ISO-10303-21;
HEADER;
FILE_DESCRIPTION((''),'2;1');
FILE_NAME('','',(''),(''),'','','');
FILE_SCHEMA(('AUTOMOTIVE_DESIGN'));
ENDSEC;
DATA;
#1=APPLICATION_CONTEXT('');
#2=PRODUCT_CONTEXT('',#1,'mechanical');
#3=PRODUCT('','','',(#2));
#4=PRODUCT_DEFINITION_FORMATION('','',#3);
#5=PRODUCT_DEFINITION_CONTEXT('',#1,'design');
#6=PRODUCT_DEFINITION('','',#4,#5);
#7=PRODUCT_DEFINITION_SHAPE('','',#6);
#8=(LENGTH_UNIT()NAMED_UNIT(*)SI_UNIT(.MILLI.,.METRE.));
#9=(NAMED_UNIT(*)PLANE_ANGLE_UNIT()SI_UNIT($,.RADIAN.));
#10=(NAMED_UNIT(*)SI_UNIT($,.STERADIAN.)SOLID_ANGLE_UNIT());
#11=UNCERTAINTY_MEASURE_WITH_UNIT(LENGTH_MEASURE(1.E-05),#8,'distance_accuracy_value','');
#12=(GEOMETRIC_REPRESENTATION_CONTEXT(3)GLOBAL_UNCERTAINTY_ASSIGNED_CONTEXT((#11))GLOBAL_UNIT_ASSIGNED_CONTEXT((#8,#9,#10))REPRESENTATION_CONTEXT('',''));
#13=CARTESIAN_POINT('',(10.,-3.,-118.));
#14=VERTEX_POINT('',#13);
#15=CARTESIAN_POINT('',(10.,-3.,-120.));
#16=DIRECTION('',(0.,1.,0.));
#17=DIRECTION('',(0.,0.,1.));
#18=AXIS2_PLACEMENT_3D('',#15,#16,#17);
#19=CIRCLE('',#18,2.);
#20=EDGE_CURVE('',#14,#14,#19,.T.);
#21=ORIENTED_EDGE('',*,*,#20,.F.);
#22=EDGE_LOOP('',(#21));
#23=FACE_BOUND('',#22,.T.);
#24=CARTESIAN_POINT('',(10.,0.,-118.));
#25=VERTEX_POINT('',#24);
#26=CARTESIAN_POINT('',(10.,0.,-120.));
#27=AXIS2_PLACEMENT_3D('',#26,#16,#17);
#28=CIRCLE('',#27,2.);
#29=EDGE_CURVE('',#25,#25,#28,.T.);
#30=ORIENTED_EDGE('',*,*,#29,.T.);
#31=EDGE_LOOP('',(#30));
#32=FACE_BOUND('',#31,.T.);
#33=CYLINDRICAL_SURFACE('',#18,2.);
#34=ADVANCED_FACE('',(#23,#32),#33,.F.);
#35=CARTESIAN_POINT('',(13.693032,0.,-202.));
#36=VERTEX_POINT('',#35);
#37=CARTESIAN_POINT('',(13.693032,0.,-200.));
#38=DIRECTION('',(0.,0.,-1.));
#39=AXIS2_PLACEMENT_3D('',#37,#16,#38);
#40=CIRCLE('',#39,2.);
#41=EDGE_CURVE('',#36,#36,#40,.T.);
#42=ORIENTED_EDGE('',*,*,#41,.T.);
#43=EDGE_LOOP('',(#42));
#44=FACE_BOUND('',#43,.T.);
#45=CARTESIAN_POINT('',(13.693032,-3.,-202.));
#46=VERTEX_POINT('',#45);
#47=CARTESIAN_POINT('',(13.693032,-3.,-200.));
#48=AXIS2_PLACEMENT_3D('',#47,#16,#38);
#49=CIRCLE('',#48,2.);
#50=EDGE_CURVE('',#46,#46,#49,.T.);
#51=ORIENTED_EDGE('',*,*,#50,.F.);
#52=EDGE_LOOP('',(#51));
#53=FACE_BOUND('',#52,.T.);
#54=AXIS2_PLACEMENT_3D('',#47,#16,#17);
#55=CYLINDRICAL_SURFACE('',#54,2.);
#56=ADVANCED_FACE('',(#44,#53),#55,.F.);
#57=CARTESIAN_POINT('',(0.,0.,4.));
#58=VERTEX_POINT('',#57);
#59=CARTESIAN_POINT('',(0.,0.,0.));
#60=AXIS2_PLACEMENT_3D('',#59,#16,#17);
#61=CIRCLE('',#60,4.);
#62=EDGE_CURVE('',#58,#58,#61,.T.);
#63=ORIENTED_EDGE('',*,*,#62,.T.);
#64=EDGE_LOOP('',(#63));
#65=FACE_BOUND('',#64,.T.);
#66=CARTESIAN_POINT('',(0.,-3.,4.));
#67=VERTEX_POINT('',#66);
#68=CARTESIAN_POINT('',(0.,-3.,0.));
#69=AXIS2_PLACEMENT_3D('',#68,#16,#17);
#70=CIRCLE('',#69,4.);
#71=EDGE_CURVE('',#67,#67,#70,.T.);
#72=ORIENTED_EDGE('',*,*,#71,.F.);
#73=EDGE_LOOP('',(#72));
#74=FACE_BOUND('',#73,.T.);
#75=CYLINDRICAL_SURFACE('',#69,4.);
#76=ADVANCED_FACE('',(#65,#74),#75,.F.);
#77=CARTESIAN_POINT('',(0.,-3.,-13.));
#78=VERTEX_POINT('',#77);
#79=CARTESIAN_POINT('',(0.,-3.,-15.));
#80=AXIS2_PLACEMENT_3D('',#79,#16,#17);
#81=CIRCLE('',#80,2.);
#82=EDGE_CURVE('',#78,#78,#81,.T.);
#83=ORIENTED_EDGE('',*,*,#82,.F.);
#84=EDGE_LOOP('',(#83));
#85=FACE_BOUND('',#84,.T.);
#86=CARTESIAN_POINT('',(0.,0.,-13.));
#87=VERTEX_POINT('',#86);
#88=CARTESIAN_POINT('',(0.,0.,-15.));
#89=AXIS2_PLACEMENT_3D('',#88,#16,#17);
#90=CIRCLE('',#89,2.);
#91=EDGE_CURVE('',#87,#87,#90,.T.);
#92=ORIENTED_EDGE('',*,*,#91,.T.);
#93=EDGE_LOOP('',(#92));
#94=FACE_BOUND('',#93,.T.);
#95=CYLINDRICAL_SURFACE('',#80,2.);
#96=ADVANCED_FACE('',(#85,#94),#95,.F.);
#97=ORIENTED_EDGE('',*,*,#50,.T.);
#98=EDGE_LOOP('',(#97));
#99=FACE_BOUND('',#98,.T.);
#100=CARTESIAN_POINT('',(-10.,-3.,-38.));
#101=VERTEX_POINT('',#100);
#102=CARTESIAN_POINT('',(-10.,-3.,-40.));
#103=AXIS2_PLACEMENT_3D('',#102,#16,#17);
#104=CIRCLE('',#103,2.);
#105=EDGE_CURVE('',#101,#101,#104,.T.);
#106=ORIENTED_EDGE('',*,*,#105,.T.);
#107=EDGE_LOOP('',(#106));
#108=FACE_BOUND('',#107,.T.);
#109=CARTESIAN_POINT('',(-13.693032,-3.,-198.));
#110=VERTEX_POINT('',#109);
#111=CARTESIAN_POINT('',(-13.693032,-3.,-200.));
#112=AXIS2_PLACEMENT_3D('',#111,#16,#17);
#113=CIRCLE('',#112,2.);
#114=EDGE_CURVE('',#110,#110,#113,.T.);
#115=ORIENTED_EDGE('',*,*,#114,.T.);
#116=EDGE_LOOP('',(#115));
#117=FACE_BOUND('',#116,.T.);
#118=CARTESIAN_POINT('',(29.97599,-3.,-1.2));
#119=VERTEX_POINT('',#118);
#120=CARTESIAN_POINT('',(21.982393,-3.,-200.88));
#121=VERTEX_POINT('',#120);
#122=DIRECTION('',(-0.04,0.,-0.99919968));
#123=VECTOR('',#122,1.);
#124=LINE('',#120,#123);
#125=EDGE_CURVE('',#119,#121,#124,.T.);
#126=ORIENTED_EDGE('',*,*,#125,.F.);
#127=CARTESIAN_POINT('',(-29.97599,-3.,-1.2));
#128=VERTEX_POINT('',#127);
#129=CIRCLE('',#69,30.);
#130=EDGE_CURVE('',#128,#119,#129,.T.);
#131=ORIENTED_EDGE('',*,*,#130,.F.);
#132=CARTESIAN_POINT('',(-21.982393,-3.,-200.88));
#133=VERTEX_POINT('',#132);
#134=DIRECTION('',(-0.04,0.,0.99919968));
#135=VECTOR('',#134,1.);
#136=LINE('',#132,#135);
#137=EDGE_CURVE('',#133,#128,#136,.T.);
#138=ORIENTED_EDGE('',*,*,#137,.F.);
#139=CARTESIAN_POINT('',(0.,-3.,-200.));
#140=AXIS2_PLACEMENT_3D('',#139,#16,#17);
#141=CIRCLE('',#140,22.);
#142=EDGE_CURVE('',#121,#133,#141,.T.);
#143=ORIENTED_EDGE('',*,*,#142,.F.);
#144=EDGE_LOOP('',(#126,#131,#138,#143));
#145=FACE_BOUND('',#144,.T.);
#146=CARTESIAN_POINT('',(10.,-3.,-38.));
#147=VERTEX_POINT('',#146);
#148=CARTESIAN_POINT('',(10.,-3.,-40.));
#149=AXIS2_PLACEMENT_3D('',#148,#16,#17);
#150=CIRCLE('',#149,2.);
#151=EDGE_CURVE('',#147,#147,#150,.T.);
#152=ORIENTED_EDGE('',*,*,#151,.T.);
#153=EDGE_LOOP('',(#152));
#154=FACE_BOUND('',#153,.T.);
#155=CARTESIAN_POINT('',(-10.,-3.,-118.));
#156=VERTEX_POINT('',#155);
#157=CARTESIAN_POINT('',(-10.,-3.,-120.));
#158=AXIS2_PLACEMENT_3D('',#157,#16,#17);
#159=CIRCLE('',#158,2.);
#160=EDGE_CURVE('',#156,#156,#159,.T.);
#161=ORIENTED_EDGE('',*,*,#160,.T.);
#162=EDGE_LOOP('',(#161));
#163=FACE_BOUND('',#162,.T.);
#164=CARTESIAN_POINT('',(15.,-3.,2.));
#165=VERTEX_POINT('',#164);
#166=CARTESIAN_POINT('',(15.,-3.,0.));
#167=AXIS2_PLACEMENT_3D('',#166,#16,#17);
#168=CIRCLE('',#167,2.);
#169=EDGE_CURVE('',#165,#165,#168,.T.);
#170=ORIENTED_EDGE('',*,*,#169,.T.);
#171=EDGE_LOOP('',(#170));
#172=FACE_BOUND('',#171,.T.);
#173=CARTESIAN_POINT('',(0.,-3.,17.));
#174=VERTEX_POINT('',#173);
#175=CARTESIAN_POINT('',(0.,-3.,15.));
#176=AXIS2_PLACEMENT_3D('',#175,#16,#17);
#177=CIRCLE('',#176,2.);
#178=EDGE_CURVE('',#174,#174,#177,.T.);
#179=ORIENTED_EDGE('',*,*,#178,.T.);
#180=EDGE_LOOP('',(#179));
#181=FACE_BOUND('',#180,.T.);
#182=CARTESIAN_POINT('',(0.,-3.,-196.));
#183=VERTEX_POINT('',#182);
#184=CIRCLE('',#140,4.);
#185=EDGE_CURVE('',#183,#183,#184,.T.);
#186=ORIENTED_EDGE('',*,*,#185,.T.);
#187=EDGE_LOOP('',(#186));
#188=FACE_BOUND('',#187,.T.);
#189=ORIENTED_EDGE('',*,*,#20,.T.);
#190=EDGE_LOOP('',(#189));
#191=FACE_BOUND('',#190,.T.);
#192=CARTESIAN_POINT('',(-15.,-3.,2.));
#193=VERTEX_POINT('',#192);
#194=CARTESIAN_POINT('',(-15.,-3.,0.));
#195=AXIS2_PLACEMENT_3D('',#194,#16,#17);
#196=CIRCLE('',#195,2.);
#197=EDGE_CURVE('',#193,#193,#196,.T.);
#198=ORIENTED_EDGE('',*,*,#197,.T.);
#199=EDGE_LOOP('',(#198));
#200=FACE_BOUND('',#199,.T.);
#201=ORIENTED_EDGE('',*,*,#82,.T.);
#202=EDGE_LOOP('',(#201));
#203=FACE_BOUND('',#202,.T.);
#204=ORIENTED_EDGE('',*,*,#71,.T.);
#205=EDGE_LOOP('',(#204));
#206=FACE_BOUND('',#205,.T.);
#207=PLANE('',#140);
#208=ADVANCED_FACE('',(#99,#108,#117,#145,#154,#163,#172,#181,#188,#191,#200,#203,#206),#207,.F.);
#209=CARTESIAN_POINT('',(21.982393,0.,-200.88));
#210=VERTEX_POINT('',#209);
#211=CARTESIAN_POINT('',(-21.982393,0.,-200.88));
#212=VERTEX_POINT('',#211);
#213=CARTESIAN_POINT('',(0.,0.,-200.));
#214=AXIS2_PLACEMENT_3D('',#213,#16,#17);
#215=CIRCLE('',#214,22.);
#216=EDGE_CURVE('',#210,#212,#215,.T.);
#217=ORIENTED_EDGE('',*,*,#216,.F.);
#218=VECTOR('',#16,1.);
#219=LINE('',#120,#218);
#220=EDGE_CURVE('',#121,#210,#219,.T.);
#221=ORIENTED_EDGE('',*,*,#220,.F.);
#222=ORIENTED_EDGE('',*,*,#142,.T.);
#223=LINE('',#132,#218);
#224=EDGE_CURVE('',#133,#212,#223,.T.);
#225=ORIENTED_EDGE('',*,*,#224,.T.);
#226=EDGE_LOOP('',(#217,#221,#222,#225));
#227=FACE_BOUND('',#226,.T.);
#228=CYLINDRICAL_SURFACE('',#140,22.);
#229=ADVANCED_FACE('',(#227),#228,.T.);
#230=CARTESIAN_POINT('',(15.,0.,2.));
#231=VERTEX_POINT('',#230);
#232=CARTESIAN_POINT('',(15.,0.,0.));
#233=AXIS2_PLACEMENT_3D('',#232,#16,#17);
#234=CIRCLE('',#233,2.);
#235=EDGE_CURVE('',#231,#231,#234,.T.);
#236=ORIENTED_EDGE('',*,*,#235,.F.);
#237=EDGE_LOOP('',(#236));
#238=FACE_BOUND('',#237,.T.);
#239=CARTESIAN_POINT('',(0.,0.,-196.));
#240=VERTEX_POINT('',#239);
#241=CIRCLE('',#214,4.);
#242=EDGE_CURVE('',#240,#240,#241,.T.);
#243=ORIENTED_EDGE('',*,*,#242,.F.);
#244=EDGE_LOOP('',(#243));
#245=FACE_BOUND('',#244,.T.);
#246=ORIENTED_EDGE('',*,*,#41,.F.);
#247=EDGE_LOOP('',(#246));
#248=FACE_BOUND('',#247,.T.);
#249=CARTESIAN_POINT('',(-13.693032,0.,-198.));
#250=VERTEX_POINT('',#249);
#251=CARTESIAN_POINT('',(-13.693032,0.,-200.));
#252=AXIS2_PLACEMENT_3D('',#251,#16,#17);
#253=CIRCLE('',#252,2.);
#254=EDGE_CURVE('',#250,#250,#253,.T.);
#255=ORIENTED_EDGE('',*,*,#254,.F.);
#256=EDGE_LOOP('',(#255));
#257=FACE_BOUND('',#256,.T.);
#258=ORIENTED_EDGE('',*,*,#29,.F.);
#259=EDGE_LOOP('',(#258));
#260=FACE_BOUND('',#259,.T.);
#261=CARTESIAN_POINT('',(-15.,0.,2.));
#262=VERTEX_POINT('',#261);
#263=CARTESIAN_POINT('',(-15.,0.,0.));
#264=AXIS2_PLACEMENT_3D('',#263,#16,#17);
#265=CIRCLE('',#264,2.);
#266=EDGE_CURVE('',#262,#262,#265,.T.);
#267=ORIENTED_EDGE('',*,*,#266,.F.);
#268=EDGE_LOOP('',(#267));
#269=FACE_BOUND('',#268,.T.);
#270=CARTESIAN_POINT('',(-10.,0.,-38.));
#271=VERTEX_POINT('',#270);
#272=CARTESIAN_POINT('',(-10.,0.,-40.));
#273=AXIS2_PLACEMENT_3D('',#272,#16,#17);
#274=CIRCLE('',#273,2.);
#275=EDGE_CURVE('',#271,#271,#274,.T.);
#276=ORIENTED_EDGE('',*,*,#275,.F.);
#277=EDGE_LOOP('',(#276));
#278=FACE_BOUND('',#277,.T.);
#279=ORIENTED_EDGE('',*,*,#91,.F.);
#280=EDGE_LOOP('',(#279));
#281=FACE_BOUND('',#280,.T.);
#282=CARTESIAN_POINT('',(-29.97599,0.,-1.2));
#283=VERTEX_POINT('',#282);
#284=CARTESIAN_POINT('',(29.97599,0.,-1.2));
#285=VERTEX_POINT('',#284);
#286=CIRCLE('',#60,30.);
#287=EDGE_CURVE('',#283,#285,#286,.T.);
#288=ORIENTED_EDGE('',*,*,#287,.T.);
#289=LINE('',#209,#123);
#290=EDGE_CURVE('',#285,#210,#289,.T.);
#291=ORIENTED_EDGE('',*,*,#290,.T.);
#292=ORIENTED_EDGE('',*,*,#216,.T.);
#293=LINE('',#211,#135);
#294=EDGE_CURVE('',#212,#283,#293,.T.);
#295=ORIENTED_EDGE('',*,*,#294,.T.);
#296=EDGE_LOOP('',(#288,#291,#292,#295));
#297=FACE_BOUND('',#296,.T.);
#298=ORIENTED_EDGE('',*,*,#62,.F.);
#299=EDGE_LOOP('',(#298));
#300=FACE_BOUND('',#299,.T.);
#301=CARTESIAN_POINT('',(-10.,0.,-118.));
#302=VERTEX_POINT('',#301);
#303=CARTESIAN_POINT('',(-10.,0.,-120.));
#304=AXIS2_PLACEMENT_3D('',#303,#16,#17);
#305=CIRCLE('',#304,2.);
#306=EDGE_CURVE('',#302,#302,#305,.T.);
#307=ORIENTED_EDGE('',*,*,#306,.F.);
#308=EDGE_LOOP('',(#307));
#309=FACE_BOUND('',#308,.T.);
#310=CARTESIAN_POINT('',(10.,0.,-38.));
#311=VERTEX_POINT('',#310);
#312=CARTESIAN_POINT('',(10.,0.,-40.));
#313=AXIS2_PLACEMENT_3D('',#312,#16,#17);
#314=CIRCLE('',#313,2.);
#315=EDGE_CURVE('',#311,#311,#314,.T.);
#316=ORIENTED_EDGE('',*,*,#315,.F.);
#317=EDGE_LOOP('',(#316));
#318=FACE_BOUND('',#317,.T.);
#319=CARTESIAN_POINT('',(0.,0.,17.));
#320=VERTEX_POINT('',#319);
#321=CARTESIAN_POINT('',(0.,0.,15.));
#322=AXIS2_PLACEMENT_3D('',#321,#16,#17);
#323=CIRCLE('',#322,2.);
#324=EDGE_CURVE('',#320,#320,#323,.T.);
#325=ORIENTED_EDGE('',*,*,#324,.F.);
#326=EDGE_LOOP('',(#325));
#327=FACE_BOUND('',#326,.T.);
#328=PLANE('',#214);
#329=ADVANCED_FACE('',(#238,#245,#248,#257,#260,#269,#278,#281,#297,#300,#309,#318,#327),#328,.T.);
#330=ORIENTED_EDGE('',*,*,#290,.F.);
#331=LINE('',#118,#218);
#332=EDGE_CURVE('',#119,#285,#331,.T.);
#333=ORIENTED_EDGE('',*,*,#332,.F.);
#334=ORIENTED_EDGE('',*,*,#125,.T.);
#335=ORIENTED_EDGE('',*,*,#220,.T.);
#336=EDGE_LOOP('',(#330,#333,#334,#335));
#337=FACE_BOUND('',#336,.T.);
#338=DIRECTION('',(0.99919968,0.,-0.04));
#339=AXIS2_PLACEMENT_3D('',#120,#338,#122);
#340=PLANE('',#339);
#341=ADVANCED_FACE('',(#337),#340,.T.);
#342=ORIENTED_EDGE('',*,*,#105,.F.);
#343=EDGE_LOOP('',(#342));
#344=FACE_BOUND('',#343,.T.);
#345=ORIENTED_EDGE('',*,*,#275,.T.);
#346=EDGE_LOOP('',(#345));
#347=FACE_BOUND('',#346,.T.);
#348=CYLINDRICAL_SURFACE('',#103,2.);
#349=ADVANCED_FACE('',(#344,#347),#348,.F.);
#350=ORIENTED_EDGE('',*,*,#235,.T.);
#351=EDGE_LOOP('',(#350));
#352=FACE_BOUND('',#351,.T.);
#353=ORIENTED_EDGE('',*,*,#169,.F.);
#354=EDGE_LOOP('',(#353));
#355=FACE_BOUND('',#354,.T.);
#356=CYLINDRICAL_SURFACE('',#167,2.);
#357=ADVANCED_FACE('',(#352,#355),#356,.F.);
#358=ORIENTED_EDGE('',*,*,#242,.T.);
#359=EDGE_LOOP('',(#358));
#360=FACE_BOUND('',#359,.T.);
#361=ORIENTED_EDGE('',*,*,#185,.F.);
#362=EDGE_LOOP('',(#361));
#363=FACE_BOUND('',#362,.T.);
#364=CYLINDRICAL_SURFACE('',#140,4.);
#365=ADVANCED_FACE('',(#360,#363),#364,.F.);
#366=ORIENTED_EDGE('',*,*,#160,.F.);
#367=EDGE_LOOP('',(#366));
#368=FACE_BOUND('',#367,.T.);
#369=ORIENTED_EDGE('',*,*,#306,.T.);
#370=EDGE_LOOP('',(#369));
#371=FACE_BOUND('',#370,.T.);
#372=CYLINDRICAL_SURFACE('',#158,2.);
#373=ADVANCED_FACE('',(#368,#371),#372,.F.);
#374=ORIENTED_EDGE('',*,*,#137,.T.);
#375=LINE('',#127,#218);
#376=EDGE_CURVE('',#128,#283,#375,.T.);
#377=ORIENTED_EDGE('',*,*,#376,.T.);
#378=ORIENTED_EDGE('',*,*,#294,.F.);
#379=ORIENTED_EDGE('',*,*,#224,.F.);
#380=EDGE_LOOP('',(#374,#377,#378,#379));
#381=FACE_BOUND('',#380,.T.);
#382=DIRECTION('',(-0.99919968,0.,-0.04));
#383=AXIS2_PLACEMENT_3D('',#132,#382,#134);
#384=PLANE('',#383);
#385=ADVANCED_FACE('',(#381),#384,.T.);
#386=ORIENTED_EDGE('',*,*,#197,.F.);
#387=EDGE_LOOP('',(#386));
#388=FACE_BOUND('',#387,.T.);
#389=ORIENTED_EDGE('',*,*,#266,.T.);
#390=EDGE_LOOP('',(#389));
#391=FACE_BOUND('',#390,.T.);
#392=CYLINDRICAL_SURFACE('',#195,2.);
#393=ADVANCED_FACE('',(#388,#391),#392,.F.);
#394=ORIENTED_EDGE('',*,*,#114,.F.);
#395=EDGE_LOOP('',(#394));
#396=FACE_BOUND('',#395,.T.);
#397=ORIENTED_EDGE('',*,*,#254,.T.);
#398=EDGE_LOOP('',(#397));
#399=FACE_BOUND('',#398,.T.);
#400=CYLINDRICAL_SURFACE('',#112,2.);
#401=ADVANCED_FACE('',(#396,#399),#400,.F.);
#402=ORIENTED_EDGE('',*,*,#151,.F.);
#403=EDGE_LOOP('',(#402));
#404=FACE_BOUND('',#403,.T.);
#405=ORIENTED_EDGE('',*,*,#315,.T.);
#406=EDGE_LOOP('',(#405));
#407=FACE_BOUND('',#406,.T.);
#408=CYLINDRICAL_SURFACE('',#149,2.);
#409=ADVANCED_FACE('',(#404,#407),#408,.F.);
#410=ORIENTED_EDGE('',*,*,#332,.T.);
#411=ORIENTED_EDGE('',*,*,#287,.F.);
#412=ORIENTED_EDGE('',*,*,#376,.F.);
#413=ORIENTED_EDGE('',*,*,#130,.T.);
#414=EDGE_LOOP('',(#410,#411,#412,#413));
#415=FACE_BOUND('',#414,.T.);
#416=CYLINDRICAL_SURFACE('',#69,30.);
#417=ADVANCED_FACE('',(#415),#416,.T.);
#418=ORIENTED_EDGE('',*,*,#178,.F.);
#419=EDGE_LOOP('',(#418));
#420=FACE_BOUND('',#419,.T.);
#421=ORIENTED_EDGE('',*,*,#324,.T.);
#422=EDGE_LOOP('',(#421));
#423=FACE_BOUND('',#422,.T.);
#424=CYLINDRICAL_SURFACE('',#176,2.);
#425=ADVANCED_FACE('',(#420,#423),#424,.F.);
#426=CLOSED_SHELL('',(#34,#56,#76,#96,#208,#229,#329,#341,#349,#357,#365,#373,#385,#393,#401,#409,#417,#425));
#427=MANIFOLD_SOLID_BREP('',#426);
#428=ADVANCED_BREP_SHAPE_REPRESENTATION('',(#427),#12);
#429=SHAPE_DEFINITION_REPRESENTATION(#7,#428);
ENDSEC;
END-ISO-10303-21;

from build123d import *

# Parameters (mm, degrees)
SKETCH_1_R             = 4
SKETCH_1_R_2           = 2
SM_BASE_FLANGE_1_DEPTH = 3


# Sheet-metal steps are written as plain solids
with BuildPart() as part:
    # Sketch 1 → 基体-法兰1 (new body)
    with BuildSketch(Plane(origin=(0, 0, 0), x_dir=(1, 0, 0), z_dir=(0, 1, 0))):
        with BuildLine():
            Line((21.982392954, 200.88), (29.975990392, 1.2))
            ThreePointArc((29.975990392, 1.2), (0, -30), (-29.975990392, 1.2))
            Line((-29.975990392, 1.2), (-21.982392954, 200.88))
            ThreePointArc((-21.982392954, 200.88), (0, 222), (21.982392954, 200.88))
        make_face()
        with Locations(Location((0, 0, 0), (0, 0, 270))):
            Circle(SKETCH_1_R, mode=Mode.SUBTRACT)
        with Locations(Location((0, 200, 0), (0, 0, 270))):
            Circle(SKETCH_1_R, mode=Mode.SUBTRACT)
        with Locations(Location((10, 120, 0), (0, 0, 270))):
            Circle(SKETCH_1_R_2, mode=Mode.SUBTRACT)
        with Locations(Location((-10, 120, 0), (0, 0, 270))):
            Circle(SKETCH_1_R_2, mode=Mode.SUBTRACT)
        with Locations(Location((10, 40, 0), (0, 0, 270))):
            Circle(SKETCH_1_R_2, mode=Mode.SUBTRACT)
        with Locations(Location((-10, 40, 0), (0, 0, 270))):
            Circle(SKETCH_1_R_2, mode=Mode.SUBTRACT)
        with Locations(Location((0, 15, 0), (0, 0, 270))):
            Circle(SKETCH_1_R_2, mode=Mode.SUBTRACT)
        with Locations(Location((15, 0, 0), (0, 0, 270))):
            Circle(SKETCH_1_R_2, mode=Mode.SUBTRACT)
        with Locations(Location((0, -15, 0), (0, 0, 270))):
            Circle(SKETCH_1_R_2, mode=Mode.SUBTRACT)
        with Locations(Location((-15, 0, 0), (0, 0, 270))):
            Circle(SKETCH_1_R_2, mode=Mode.SUBTRACT)
        with Locations(Location((-13.693032158, 200, 0), (0, 0, 270))):
            Circle(SKETCH_1_R_2, mode=Mode.SUBTRACT)
        with Locations(Location((13.693032158, 200, 0), (0, 0, 90))):
            Circle(SKETCH_1_R_2, mode=Mode.SUBTRACT)
    extrude(amount=-SM_BASE_FLANGE_1_DEPTH)


solid = part.part
